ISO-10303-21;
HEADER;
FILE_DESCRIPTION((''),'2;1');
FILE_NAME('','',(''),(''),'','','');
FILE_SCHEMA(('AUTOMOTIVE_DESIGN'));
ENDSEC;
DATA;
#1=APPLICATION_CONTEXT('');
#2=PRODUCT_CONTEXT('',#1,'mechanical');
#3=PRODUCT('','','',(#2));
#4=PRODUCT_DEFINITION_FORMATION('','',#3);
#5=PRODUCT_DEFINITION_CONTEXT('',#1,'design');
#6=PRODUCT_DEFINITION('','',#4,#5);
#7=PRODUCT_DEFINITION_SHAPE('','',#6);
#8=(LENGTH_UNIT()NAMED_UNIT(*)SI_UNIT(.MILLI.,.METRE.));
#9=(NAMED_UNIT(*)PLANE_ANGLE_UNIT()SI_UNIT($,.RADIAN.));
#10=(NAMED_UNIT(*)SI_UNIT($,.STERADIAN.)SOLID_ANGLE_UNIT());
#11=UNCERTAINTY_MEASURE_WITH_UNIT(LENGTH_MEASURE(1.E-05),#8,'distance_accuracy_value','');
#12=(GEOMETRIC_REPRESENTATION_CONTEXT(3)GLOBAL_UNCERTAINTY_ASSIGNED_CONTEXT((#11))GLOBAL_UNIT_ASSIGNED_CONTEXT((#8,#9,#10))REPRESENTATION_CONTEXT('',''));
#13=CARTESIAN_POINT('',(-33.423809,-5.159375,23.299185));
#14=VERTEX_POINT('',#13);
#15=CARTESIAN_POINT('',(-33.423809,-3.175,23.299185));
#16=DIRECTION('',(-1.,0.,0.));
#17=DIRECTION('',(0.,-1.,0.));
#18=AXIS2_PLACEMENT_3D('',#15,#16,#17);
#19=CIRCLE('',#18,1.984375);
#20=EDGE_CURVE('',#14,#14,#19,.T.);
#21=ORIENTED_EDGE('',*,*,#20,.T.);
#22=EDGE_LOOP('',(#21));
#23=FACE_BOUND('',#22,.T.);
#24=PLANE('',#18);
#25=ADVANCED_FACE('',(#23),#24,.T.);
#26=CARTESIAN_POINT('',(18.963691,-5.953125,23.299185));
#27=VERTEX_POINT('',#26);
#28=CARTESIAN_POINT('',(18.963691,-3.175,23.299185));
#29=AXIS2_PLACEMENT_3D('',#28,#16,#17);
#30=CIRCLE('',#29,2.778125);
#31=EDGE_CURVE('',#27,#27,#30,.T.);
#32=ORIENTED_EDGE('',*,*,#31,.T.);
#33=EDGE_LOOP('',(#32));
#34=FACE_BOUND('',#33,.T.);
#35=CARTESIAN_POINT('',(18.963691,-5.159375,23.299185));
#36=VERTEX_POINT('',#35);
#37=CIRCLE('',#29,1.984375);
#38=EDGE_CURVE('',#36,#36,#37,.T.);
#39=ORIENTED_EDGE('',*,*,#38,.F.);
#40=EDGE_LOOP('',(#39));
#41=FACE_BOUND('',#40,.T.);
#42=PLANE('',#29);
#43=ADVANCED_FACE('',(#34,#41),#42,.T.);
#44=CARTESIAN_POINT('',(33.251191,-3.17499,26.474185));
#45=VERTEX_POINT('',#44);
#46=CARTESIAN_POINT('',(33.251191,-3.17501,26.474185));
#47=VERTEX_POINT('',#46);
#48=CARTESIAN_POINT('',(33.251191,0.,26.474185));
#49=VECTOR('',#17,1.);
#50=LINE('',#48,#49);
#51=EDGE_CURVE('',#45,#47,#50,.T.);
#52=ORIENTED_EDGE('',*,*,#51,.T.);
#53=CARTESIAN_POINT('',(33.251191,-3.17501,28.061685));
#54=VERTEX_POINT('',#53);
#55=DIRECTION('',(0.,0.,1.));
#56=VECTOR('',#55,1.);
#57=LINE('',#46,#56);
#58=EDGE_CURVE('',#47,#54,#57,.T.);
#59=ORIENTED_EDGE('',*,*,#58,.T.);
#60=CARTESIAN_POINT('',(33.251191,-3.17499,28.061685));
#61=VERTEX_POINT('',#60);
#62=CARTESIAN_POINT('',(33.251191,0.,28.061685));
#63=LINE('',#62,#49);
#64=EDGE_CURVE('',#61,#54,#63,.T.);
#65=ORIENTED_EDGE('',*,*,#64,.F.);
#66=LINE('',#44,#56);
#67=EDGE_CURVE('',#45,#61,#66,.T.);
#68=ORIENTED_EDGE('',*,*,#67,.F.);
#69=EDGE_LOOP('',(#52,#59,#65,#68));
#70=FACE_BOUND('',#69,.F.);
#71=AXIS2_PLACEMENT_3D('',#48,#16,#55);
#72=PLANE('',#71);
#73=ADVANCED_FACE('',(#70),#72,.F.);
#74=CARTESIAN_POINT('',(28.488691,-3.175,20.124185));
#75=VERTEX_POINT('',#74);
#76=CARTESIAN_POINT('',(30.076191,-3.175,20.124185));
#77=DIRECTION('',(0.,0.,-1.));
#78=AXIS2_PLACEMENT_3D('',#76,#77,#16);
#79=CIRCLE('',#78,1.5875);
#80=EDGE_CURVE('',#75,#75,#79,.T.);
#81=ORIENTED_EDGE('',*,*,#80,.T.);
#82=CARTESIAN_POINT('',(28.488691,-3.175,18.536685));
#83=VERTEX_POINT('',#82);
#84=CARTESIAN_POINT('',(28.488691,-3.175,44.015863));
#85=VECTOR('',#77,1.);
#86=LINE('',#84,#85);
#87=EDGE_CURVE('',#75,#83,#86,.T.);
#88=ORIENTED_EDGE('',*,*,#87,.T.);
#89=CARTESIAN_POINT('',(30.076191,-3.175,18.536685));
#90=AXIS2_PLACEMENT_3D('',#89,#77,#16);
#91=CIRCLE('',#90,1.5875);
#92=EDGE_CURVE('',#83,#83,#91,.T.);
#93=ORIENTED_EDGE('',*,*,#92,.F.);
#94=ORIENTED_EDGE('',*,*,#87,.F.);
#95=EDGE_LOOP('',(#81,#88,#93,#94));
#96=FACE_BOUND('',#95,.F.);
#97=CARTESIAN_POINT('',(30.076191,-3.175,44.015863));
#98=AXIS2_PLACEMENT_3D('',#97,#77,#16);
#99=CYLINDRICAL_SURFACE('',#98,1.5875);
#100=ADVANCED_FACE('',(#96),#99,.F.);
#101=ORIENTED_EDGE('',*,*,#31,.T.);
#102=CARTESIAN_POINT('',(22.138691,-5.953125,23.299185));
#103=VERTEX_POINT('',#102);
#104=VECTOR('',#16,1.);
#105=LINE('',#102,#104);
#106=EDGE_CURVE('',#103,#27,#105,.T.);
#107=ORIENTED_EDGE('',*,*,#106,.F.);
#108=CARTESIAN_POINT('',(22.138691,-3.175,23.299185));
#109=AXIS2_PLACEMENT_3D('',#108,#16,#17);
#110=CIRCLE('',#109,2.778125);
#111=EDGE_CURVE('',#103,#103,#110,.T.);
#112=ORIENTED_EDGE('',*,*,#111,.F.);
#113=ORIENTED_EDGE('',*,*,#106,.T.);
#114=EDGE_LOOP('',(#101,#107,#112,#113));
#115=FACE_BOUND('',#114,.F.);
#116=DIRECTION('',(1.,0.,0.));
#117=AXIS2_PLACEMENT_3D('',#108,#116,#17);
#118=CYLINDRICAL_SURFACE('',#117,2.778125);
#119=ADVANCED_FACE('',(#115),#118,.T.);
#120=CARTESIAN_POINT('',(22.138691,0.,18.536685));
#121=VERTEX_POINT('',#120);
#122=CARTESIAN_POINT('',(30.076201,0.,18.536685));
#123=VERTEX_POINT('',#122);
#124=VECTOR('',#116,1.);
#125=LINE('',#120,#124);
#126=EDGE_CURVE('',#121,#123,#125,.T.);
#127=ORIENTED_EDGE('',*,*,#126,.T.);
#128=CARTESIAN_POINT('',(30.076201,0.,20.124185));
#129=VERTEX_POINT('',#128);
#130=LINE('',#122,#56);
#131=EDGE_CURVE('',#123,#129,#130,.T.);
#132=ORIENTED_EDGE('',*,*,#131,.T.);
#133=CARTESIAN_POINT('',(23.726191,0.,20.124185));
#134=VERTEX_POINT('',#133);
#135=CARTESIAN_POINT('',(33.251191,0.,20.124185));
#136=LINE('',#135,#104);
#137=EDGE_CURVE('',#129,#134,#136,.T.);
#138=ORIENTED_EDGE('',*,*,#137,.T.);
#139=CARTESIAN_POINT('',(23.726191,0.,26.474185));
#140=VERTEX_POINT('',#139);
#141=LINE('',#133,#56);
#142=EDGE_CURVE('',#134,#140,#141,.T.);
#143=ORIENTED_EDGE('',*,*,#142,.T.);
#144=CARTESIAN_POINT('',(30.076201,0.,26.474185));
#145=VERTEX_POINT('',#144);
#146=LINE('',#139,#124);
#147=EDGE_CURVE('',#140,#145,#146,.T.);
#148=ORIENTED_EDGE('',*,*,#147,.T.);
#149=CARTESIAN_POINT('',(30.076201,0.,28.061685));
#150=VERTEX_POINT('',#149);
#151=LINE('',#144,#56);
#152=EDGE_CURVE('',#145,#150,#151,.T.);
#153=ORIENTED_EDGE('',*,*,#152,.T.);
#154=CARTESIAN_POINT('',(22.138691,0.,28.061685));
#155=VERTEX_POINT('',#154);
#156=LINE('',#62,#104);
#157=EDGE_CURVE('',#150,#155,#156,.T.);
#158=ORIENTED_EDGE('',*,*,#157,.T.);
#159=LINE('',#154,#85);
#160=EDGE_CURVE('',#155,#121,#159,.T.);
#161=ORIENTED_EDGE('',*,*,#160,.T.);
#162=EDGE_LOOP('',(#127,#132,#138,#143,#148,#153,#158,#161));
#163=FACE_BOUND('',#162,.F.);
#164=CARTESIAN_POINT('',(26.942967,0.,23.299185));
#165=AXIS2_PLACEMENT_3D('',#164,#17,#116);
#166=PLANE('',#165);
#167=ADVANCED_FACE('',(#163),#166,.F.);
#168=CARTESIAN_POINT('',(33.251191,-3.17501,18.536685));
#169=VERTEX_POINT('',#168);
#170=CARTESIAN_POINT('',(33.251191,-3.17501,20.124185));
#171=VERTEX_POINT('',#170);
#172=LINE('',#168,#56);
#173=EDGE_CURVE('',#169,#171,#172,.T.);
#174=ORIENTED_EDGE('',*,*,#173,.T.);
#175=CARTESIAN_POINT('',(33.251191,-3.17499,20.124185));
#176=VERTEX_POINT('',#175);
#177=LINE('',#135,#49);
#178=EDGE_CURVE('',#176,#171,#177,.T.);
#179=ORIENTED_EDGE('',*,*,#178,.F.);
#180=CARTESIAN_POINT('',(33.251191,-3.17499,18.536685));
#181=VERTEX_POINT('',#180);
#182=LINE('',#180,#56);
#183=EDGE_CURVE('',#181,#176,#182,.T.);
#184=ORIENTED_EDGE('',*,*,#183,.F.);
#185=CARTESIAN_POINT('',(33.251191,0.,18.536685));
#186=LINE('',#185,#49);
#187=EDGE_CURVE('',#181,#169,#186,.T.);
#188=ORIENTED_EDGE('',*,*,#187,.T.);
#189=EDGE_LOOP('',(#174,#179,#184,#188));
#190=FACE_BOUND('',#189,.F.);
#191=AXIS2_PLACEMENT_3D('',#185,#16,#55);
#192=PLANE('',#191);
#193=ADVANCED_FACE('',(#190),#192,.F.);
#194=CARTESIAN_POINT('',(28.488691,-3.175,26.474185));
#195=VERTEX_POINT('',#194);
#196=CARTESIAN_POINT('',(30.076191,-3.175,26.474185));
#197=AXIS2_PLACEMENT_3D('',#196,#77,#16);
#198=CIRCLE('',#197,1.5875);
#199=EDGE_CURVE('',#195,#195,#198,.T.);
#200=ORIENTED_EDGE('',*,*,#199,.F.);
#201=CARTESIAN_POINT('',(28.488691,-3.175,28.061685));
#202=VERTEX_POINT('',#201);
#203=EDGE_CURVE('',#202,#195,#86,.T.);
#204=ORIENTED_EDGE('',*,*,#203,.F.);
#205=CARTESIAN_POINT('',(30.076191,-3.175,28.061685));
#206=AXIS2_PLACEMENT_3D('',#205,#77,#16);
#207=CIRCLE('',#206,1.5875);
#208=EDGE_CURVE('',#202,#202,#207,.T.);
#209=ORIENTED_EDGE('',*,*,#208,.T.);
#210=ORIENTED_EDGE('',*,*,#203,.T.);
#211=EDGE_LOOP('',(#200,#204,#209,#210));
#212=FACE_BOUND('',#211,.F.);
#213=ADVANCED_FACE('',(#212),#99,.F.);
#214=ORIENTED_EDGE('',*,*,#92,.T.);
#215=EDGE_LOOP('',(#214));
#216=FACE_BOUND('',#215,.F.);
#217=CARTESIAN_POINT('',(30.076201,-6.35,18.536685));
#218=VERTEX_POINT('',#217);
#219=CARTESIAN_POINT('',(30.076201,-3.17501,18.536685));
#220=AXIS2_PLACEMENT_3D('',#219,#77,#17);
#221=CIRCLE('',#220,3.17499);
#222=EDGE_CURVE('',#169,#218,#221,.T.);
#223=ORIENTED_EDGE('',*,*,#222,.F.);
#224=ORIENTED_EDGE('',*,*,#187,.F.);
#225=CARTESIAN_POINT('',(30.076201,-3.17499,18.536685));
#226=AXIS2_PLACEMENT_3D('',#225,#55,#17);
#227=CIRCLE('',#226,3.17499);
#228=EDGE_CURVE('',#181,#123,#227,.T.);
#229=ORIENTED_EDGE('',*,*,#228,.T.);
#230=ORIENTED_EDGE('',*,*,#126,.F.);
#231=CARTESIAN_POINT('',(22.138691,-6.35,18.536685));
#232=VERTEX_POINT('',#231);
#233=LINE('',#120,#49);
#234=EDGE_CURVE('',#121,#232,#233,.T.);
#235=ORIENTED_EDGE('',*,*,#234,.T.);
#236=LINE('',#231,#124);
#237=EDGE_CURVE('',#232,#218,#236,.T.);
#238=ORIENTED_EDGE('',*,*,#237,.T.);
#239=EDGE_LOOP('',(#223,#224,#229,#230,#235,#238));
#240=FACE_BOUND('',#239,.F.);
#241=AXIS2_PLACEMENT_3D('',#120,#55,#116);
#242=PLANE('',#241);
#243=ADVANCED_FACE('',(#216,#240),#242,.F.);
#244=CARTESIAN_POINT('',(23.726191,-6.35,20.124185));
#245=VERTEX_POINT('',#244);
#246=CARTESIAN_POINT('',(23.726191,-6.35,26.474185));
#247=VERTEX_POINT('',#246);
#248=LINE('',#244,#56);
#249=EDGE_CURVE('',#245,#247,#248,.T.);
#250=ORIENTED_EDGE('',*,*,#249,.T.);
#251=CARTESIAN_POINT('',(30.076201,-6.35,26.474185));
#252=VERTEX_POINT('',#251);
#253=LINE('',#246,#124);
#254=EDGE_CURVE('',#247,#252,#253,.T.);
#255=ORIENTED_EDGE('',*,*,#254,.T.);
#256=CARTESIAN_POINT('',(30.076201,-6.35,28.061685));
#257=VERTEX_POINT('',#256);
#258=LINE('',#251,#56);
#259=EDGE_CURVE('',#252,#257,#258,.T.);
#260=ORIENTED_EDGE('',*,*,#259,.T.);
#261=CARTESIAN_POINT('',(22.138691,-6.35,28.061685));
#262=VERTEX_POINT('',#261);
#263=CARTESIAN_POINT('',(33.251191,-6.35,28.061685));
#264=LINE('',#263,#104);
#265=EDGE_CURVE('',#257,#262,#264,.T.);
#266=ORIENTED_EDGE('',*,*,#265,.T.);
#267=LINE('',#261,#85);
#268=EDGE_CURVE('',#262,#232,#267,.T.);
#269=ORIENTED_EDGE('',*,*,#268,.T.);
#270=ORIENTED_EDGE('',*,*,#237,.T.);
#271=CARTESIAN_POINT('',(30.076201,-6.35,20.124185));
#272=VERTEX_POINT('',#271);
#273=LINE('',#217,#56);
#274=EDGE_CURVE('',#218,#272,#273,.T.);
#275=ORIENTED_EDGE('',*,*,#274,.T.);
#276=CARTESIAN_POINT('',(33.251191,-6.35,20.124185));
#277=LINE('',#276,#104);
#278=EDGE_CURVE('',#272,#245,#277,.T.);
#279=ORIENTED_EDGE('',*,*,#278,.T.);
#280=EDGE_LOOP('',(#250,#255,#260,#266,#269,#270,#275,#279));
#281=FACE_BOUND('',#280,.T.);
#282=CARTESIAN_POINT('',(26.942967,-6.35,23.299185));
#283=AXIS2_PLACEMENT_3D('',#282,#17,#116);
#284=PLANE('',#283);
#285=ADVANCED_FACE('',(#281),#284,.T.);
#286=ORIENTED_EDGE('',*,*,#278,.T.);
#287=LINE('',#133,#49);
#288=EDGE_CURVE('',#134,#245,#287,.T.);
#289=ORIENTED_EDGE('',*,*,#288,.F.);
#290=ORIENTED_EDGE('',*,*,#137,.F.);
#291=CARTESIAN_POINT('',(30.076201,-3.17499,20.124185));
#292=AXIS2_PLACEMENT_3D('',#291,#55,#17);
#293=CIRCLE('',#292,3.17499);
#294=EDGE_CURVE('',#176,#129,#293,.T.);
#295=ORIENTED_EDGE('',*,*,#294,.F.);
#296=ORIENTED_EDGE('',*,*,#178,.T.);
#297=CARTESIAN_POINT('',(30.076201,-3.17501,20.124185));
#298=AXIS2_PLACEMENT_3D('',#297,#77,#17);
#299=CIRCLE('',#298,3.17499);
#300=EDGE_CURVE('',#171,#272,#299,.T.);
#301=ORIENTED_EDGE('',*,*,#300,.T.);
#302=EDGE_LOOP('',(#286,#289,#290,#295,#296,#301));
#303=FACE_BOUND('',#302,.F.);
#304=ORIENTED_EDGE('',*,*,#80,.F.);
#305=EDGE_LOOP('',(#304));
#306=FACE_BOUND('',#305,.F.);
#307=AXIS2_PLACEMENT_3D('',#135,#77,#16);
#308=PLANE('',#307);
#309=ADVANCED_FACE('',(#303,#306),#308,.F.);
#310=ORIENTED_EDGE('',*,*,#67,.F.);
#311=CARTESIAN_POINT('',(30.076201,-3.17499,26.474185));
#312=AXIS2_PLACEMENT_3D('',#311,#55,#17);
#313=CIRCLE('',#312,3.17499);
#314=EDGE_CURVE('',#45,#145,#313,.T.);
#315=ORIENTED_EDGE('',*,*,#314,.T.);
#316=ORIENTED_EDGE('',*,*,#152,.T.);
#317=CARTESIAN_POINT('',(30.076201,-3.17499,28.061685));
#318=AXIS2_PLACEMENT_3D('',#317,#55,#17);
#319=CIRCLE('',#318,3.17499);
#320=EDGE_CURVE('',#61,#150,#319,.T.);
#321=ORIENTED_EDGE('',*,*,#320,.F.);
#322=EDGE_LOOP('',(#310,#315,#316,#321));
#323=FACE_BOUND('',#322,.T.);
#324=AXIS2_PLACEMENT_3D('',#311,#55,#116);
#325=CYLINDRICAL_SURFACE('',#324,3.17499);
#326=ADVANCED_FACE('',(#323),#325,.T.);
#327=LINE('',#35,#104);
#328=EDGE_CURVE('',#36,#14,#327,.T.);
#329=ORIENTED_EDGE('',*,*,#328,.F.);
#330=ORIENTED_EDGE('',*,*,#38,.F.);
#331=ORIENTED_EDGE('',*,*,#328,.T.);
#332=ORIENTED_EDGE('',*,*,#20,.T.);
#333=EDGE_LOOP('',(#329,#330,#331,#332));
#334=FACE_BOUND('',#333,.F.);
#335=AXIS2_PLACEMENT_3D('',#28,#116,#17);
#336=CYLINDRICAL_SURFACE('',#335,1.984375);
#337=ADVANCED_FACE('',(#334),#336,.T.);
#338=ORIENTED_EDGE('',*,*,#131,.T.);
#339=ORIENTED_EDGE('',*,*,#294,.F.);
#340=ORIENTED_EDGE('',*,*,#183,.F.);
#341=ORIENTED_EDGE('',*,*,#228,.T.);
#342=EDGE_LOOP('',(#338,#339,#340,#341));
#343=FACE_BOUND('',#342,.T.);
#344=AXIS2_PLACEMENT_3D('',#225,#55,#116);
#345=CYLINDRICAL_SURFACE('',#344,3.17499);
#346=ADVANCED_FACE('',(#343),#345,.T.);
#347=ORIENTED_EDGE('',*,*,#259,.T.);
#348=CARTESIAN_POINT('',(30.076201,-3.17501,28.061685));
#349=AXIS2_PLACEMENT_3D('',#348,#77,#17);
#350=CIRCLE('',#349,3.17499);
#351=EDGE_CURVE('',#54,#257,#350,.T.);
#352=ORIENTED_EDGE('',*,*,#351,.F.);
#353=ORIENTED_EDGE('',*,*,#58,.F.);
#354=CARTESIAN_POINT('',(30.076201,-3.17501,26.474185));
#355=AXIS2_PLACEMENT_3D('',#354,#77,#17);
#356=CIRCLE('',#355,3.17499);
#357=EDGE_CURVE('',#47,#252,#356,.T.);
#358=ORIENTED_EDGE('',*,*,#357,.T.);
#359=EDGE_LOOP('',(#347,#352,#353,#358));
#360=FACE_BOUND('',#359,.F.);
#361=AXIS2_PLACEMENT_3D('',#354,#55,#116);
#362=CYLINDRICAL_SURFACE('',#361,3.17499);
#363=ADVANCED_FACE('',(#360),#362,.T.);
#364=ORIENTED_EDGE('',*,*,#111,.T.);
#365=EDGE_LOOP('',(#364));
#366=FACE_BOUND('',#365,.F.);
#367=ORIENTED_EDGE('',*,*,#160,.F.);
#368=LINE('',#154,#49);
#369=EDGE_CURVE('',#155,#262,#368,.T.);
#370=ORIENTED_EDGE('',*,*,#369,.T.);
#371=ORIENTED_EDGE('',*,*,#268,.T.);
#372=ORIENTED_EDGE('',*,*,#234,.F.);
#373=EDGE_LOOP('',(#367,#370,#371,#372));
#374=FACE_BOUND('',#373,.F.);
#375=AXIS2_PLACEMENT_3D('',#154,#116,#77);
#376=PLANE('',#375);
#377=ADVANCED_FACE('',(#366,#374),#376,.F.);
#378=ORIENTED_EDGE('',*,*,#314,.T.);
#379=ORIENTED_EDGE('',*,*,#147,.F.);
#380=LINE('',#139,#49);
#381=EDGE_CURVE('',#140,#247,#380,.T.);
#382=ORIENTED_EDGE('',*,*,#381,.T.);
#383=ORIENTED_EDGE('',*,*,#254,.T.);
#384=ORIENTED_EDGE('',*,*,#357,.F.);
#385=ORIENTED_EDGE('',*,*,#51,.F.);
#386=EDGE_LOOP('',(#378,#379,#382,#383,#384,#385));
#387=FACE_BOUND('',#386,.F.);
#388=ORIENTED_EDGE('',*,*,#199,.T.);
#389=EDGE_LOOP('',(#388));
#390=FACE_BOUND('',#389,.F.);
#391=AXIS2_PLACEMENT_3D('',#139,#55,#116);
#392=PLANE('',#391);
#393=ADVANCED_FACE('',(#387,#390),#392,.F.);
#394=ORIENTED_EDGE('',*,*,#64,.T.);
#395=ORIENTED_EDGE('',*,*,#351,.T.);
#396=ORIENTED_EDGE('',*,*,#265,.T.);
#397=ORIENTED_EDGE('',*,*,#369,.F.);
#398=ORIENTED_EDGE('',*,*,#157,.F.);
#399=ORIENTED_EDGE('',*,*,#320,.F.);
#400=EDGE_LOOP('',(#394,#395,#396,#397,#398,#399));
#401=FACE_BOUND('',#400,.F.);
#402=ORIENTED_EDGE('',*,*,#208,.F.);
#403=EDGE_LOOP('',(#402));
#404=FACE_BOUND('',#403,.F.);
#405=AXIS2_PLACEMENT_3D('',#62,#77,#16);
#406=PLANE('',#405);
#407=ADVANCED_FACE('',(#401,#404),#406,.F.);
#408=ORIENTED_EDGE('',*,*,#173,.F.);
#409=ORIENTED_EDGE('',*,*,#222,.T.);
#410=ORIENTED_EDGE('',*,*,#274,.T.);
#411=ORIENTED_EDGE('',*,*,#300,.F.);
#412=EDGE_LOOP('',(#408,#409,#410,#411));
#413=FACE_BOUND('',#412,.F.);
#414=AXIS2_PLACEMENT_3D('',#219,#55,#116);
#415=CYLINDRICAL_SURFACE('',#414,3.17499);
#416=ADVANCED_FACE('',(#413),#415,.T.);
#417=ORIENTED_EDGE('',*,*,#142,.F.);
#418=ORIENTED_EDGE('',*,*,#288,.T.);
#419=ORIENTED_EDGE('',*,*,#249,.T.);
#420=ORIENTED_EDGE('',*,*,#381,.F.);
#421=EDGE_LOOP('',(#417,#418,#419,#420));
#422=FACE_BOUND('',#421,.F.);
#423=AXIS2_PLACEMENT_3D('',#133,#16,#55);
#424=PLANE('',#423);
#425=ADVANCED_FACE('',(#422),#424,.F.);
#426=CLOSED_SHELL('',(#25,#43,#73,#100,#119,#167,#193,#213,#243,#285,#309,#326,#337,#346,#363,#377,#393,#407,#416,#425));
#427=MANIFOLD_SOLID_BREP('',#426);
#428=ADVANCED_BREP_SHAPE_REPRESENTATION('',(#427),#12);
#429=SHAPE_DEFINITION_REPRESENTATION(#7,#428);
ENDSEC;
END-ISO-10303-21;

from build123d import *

# Parameters (mm, degrees)
F1_DEPTH = 6.35
F2_R     = 3.17499
F4_D     = 3.175
F5_R     = 2.778125
F6_DEPTH = 3.175
F7_R     = 1.984375
F8_DEPTH = 52.3875


# Not quite as in the source:
# - a fillet or chamfer is up to 0.001 mm smaller than in the source, because OpenCascade refuses the exact size


with BuildPart() as f1:
    # F0 (on Front) → F1 (new body)
    with BuildSketch(Plane.XZ):
        Polygon((33.251190576, 26.4741850346), (33.251190576, 28.0616850346), (22.138690576, 28.0616850346), (22.138690576, 18.5366850346), (33.251190576, 18.5366850346), (33.251190576, 20.1241850346), (23.726190576, 20.1241850346), (23.726190576, 26.4741850346), align=None)
    extrude(amount=F1_DEPTH)

    # F2 (radius 3.175 in the source; OpenCascade refuses exactly that, so slightly less here)
    f2_edges = [f1.edges().sort_by_distance(p)[0] for p in [
        (33.251191, -6.35, 19.330435),
        (33.251191, -6.35, 27.267935),
        (33.251191, 0, 27.267935),
        (33.251191, 0, 19.330435),
    ]]
    fillet(f2_edges, radius=F2_R)

    # F4 (through all)
    with Locations(Plane.XY.offset(28.0616850346)):
        with Locations((30.076190576, -3.175)):
            Hole(F4_D / 2)

    # F5 (on face) → F6 (join)
    with BuildSketch(Plane(origin=(22.138690576, 0, 0), x_dir=(0, -1, 0), z_dir=(-1, 0, 0))):
        with Locations((3.175, 23.2991850346)):
            Circle(F5_R)
    extrude(amount=F6_DEPTH)

    # F7 (on face) → F8 (join)
    with BuildSketch(Plane(origin=(18.963690576, 0, 0), x_dir=(0, -1, 0), z_dir=(-1, 0, 0))):
        with Locations((3.175, 23.2991850346)):
            Circle(F7_R)
    extrude(amount=F8_DEPTH)


solid = f1.part
